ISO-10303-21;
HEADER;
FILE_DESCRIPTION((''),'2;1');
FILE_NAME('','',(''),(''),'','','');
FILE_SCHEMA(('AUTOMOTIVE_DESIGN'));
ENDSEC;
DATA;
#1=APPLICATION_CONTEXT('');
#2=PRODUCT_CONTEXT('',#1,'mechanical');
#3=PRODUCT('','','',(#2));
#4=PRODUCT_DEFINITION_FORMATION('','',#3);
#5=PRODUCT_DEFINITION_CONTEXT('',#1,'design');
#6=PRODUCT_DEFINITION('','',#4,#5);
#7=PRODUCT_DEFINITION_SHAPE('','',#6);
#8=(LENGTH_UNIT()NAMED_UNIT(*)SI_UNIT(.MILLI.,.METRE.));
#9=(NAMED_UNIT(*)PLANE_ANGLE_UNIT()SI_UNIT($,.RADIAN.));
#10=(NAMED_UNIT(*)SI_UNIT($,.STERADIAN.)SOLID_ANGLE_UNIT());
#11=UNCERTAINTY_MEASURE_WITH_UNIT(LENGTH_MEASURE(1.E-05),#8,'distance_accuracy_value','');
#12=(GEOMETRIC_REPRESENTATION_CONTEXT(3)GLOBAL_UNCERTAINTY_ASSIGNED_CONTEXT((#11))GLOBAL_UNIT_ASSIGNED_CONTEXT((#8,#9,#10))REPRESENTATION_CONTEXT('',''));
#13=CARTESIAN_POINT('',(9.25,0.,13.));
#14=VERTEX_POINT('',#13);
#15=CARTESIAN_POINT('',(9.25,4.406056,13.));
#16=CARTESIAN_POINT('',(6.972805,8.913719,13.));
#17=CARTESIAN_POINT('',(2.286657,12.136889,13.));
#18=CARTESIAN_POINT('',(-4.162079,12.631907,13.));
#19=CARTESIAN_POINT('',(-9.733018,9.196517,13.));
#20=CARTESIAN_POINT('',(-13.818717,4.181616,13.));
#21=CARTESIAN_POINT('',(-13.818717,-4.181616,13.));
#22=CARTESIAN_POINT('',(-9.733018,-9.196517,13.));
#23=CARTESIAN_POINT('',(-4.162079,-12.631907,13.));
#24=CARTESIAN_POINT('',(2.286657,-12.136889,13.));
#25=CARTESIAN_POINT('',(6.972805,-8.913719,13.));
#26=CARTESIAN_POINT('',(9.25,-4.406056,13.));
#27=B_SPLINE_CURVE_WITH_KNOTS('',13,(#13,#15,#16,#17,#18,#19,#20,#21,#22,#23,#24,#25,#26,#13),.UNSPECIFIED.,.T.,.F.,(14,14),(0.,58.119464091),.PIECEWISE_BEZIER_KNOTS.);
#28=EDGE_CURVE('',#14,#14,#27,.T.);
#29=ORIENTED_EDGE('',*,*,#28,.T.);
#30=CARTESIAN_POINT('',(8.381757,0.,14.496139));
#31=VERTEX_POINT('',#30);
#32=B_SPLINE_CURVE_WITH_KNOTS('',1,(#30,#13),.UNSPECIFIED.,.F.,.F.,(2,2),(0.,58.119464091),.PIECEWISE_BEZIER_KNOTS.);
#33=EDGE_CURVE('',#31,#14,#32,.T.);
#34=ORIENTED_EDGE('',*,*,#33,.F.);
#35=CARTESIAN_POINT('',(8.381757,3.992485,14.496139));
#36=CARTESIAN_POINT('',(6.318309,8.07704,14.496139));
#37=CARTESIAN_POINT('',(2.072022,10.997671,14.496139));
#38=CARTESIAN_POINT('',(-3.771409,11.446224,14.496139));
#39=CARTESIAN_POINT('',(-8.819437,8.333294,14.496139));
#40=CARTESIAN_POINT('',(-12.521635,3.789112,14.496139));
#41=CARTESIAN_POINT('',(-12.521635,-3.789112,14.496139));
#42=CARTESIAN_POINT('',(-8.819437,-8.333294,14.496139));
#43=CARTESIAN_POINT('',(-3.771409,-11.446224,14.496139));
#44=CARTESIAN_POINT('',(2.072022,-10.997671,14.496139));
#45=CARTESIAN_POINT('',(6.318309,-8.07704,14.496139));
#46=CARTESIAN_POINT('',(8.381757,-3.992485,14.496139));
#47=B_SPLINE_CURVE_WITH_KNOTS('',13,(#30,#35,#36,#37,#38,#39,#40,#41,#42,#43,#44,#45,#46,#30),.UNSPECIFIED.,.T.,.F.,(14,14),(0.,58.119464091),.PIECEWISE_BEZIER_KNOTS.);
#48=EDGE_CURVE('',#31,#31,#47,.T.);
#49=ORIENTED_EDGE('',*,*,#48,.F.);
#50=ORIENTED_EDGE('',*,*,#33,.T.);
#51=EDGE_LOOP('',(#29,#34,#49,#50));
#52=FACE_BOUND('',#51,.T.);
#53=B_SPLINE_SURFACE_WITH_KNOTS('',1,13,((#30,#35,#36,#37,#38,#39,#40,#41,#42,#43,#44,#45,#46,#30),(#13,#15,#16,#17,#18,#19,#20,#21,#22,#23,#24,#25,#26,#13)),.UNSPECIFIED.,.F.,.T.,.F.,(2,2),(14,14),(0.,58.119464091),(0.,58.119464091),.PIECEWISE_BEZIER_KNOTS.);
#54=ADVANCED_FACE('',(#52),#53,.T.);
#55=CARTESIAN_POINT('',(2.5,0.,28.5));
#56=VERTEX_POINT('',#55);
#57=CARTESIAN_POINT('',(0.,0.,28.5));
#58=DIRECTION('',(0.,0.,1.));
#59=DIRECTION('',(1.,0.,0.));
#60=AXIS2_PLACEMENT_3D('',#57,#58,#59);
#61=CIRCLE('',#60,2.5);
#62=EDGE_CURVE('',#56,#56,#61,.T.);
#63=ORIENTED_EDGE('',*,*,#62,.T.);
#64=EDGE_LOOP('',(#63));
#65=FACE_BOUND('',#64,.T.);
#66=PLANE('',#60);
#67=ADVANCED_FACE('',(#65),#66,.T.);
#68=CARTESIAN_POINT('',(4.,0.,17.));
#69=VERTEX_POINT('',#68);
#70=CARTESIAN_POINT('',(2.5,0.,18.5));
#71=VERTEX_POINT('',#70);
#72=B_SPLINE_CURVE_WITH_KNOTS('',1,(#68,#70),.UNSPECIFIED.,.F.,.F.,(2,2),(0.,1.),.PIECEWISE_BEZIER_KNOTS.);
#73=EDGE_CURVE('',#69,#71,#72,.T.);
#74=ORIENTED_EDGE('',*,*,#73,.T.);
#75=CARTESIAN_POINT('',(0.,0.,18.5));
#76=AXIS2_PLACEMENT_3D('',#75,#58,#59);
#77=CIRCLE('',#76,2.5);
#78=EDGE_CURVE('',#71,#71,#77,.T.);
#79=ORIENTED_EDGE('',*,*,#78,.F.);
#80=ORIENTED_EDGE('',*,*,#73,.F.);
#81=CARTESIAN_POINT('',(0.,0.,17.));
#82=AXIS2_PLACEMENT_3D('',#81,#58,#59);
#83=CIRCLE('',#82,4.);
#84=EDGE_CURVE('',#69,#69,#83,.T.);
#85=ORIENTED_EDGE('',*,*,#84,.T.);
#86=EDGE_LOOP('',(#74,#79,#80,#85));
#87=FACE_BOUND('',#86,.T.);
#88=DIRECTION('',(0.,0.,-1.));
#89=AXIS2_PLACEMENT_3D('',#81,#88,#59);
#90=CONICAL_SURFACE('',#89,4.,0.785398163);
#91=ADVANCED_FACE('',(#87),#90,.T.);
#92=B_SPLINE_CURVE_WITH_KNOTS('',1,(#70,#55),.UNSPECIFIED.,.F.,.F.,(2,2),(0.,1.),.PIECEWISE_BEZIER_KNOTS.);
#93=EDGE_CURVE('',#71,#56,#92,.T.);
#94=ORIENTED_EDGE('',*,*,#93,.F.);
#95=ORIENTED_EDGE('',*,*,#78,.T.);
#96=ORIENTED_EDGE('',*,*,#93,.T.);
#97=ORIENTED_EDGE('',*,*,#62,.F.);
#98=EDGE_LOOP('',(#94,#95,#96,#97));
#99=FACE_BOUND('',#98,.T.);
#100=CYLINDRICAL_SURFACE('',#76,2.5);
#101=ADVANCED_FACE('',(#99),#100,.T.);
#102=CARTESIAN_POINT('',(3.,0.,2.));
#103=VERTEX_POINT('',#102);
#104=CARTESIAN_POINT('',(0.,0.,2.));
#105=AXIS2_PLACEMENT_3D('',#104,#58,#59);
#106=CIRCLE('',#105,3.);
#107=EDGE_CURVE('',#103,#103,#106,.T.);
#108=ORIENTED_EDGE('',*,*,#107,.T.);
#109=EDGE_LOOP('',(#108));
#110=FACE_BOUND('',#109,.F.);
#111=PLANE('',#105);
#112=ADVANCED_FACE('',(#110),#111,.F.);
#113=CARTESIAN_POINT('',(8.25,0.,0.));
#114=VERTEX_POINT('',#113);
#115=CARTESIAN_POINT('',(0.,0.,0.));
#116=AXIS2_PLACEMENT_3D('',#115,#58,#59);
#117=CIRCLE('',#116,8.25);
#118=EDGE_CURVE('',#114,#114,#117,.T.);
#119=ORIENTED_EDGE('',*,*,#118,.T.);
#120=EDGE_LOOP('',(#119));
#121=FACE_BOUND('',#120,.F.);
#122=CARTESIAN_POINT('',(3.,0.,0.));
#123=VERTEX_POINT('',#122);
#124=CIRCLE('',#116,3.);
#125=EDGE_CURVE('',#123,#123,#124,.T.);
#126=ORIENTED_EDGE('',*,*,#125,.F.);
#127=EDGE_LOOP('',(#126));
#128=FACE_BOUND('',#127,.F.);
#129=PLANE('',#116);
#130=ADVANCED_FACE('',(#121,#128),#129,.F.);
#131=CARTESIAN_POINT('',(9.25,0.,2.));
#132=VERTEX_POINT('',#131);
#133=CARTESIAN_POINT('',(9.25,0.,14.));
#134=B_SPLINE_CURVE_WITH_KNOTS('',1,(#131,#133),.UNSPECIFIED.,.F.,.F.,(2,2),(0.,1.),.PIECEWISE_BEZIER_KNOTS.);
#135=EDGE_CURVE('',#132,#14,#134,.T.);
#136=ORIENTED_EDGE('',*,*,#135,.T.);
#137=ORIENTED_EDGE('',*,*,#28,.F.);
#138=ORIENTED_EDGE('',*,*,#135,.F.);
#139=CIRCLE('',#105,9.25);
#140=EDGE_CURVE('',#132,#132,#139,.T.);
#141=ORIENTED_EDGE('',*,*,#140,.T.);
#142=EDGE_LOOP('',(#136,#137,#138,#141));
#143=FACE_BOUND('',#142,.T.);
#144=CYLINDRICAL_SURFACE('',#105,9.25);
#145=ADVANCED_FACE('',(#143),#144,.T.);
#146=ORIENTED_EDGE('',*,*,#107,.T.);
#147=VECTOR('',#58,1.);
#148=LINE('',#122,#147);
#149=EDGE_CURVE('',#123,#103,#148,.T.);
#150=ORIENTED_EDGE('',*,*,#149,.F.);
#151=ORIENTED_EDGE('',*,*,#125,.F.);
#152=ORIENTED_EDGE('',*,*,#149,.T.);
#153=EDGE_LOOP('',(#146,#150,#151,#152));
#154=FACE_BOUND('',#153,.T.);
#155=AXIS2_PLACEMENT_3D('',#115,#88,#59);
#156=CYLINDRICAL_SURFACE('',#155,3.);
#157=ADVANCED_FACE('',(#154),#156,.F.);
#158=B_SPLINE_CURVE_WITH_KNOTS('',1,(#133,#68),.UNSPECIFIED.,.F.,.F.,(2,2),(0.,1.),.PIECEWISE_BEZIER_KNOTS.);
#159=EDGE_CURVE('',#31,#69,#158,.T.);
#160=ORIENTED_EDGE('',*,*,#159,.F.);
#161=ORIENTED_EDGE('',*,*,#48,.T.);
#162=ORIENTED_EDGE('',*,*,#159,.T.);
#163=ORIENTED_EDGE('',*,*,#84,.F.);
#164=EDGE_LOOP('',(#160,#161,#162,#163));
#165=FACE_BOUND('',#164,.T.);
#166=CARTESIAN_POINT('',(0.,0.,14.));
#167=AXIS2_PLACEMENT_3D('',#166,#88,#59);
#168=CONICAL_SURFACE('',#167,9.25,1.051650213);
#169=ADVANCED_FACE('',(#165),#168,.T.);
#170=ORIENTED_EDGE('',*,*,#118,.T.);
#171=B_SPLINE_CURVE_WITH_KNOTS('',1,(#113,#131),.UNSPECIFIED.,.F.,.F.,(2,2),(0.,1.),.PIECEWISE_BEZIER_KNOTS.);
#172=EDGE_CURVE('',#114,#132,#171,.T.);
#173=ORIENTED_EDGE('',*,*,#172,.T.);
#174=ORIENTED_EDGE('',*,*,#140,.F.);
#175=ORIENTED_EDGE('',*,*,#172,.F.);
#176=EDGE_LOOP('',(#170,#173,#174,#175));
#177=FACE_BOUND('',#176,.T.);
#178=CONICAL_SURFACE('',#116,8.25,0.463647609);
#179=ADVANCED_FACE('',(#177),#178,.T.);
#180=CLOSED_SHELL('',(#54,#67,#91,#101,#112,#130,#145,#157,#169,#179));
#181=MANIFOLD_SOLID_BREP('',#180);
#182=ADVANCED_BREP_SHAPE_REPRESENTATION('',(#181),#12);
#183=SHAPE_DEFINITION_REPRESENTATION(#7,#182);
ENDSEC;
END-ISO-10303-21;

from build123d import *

# Parameters (mm, degrees)
F5_R       = 8.25
F6_R       = 9.25
F11_FACE_R = 9.25
F7_R       = 9.25
F12_FACE_R = 9.25
F9_R       = 4
F13_FACE_R = 4
F8_R       = 2.5
F14_FACE_R = 2.5
F10_R      = 2.5
F16_SIZE   = 1
F17_R      = 3
F18_DEPTH  = 2


with BuildPart() as f11:
    # F5 (on Top) → F11 section 0
    with BuildSketch(Plane.XY):
        Circle(F5_R)
    # F6 (on offset) → F11 section 1
    with BuildSketch(Plane.XY.offset(2)):
        Circle(F6_R)
    loft()

    # F11_face (on face) → F12 section 0
    with BuildSketch(Plane.XY.offset(2)):
        Circle(F11_FACE_R)
    # F7 (on offset) → F12 section 1
    with BuildSketch(Plane.XY.offset(14)):
        Circle(F7_R)
    loft()

    # F12_face (on face) → F13 section 0
    with BuildSketch(Plane.XY.offset(14)):
        Circle(F12_FACE_R)
    # F9 (on offset) → F13 section 1
    with BuildSketch(Plane.XY.offset(17)):
        Circle(F9_R)
    loft()

    # F13_face (on face) → F14 section 0
    with BuildSketch(Plane.XY.offset(17)):
        Circle(F13_FACE_R)
    # F8 (on offset) → F14 section 1
    with BuildSketch(Plane.XY.offset(18.5)):
        Circle(F8_R)
    loft()

    # F14_face (on face) → F15 section 0
    with BuildSketch(Plane.XY.offset(18.5)):
        Circle(F14_FACE_R)
    # F10 (on offset) → F15 section 1
    with BuildSketch(Plane.XY.offset(28.5)):
        Circle(F10_R)
    loft()

    # F16
    f16_edges = [f11.edges().sort_by_distance(p)[0] for p in [
        (-9.25, 0, 14),
    ]]
    chamfer(f16_edges, length=F16_SIZE)

    # F17 (on Top) → F18 (cut)
    with BuildSketch(Plane.XY):
        Circle(F17_R)
    extrude(amount=F18_DEPTH, mode=Mode.SUBTRACT)


solid = f11.part
